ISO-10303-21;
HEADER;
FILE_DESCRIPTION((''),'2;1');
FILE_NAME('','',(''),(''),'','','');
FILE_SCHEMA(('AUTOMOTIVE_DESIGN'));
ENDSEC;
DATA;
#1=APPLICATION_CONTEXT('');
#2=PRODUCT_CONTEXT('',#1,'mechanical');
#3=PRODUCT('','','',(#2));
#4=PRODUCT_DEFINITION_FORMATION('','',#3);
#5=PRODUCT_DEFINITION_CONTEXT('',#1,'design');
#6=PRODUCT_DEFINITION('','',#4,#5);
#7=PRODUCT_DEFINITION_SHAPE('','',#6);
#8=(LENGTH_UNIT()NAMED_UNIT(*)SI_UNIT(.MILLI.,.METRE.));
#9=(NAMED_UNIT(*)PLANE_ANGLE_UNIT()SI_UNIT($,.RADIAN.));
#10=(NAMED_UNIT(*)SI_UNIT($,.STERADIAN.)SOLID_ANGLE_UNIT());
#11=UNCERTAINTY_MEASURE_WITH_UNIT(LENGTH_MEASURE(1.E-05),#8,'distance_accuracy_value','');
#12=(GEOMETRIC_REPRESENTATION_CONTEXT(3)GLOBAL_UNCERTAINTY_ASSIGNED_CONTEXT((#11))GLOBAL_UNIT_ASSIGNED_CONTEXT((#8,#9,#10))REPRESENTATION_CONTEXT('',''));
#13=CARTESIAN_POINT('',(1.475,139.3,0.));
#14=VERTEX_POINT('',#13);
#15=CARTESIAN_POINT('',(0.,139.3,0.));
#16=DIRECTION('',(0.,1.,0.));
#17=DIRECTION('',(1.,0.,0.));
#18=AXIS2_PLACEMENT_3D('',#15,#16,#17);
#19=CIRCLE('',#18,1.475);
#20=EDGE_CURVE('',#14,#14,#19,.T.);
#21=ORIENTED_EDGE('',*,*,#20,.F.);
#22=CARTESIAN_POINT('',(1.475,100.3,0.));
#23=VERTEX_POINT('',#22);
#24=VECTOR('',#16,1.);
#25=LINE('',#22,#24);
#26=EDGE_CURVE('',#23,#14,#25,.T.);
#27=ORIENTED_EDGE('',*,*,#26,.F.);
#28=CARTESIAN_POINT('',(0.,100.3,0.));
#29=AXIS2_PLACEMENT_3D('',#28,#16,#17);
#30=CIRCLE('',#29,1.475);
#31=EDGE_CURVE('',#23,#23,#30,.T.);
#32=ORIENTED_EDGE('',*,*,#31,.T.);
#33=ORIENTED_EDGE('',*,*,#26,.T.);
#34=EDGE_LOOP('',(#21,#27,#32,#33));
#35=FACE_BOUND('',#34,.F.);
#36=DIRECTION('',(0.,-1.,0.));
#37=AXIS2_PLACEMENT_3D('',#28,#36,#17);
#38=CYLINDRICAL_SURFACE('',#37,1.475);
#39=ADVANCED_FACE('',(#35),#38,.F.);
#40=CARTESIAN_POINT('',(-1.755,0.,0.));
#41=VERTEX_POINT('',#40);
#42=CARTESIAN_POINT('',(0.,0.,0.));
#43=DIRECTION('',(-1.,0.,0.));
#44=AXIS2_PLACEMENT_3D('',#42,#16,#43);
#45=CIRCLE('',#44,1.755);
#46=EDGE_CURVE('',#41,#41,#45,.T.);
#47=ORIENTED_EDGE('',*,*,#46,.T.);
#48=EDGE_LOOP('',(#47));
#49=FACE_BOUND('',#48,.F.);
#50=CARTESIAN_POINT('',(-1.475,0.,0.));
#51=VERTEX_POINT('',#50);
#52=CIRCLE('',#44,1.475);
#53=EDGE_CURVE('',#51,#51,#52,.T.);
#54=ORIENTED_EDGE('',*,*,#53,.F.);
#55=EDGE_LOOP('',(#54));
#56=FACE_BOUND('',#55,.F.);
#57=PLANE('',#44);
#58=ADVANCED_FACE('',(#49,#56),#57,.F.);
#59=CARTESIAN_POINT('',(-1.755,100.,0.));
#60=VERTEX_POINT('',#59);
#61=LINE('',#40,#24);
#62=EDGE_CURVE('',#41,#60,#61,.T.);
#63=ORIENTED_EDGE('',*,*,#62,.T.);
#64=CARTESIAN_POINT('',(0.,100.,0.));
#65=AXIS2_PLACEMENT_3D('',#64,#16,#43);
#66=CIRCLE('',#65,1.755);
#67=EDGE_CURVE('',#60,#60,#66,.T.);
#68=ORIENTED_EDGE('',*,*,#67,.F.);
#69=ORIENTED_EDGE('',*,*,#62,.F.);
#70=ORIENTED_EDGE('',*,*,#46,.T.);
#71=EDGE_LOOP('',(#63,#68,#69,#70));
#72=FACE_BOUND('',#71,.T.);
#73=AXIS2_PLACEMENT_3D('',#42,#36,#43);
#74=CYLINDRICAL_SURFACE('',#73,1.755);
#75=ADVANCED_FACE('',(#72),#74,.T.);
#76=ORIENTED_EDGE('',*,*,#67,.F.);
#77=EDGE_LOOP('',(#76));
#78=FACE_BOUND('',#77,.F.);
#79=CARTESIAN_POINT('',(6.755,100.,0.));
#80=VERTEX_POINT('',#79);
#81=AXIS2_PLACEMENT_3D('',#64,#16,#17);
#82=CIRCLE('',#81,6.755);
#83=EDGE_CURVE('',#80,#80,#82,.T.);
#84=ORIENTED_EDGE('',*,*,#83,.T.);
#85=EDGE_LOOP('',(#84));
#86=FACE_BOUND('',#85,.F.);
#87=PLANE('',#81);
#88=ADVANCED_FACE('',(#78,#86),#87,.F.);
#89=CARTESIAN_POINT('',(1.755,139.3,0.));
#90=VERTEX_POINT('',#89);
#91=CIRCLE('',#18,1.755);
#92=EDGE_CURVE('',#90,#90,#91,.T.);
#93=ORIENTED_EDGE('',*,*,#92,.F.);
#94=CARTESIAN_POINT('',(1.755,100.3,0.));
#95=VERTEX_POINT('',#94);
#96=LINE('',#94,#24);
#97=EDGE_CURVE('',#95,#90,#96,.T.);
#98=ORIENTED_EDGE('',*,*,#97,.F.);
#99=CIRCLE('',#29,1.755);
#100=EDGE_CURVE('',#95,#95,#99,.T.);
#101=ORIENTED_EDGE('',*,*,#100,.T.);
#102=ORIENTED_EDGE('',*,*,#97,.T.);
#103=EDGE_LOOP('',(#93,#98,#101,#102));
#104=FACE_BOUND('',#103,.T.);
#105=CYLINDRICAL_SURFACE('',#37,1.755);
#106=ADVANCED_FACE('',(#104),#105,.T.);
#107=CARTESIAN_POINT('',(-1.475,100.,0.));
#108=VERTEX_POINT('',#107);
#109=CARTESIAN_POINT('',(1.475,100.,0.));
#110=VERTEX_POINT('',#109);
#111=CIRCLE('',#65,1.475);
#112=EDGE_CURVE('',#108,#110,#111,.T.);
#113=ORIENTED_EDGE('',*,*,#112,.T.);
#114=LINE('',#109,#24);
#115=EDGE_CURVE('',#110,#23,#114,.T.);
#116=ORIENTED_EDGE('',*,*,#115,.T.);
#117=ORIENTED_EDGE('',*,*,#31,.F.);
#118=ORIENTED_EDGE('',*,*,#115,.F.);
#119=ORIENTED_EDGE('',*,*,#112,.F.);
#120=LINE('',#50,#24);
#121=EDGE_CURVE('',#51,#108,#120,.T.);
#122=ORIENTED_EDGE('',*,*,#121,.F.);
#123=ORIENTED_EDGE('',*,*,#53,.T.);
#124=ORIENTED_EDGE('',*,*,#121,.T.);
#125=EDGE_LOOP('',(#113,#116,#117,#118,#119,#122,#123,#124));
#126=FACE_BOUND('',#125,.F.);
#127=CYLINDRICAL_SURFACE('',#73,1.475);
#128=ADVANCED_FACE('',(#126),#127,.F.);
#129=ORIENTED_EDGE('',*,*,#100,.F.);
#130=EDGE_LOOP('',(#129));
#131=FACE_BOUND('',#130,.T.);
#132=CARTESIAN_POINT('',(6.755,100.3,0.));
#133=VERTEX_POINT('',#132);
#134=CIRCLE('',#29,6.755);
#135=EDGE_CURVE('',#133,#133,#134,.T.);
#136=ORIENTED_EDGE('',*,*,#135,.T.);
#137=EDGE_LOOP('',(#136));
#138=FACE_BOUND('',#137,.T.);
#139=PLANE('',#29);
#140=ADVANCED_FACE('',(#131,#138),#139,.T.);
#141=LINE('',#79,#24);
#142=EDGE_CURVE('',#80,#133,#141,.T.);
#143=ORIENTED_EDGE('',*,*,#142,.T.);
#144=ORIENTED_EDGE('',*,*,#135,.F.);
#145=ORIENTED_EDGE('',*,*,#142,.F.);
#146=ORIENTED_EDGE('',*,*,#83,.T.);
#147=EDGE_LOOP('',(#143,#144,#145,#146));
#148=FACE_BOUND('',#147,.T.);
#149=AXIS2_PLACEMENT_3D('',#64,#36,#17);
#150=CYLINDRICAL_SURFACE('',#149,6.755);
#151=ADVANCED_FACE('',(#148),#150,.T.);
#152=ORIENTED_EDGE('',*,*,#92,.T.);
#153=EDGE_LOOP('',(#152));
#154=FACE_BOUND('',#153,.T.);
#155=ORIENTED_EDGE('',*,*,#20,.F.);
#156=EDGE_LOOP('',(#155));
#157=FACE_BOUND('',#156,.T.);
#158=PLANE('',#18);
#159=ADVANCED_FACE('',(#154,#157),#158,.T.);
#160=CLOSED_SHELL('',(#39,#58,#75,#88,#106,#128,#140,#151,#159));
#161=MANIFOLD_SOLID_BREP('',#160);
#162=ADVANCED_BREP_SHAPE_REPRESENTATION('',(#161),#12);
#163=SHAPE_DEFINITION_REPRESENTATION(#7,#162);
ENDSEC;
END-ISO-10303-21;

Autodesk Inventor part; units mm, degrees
ref_plane "YZ Plane" through (0, 0, 0) normal (1, 0, 0) x (0, 1, 0)
ref_plane "XZ Plane" through (0, 0, 0) normal (0, 1, 0) x (-1, 0, 0)
ref_plane "XY Plane" through (0, 0, 0) normal (0, 0, 1) x (1, 0, 0)
sketch "Sketch1" plane through (0, 0, 0) normal (0, 1, 0) x (-1, 0, 0)
  circle A0 centre (0, 0) radius 1.755
  circle A1 centre (0, 0) radius 1.475
  dimension "d0" = 3.51
  dimension "d1" = 2.95
extrude "Extrusion1" add sketch "Sketch1" along normal blind 100
sketch "Sketch2" plane through (0, 100, 0) normal (0, 1, 0) x (1, 0, 0)
  circle A0 centre (0, 0) radius 1.755 projected
  circle A1 centre (0, 0) radius 1.475 projected
  circle A2 centre (0, 0) radius 6.755
  dimension "d4" = 5
extrude "Extrusion2" add sketch "Sketch2" along normal blind 0.3 contours A0 | A2
sketch "Sketch3" plane through (0, 100.3, 0) normal (0, 1, 0) x (1, 0, 0)
  circle A0 centre (0, 0) radius 1.755 projected
  circle A1 centre (0, 0) radius 1.475 projected
extrude "Extrusion3" add sketch "Sketch3" along normal blind 39
properties part number "Shield"
